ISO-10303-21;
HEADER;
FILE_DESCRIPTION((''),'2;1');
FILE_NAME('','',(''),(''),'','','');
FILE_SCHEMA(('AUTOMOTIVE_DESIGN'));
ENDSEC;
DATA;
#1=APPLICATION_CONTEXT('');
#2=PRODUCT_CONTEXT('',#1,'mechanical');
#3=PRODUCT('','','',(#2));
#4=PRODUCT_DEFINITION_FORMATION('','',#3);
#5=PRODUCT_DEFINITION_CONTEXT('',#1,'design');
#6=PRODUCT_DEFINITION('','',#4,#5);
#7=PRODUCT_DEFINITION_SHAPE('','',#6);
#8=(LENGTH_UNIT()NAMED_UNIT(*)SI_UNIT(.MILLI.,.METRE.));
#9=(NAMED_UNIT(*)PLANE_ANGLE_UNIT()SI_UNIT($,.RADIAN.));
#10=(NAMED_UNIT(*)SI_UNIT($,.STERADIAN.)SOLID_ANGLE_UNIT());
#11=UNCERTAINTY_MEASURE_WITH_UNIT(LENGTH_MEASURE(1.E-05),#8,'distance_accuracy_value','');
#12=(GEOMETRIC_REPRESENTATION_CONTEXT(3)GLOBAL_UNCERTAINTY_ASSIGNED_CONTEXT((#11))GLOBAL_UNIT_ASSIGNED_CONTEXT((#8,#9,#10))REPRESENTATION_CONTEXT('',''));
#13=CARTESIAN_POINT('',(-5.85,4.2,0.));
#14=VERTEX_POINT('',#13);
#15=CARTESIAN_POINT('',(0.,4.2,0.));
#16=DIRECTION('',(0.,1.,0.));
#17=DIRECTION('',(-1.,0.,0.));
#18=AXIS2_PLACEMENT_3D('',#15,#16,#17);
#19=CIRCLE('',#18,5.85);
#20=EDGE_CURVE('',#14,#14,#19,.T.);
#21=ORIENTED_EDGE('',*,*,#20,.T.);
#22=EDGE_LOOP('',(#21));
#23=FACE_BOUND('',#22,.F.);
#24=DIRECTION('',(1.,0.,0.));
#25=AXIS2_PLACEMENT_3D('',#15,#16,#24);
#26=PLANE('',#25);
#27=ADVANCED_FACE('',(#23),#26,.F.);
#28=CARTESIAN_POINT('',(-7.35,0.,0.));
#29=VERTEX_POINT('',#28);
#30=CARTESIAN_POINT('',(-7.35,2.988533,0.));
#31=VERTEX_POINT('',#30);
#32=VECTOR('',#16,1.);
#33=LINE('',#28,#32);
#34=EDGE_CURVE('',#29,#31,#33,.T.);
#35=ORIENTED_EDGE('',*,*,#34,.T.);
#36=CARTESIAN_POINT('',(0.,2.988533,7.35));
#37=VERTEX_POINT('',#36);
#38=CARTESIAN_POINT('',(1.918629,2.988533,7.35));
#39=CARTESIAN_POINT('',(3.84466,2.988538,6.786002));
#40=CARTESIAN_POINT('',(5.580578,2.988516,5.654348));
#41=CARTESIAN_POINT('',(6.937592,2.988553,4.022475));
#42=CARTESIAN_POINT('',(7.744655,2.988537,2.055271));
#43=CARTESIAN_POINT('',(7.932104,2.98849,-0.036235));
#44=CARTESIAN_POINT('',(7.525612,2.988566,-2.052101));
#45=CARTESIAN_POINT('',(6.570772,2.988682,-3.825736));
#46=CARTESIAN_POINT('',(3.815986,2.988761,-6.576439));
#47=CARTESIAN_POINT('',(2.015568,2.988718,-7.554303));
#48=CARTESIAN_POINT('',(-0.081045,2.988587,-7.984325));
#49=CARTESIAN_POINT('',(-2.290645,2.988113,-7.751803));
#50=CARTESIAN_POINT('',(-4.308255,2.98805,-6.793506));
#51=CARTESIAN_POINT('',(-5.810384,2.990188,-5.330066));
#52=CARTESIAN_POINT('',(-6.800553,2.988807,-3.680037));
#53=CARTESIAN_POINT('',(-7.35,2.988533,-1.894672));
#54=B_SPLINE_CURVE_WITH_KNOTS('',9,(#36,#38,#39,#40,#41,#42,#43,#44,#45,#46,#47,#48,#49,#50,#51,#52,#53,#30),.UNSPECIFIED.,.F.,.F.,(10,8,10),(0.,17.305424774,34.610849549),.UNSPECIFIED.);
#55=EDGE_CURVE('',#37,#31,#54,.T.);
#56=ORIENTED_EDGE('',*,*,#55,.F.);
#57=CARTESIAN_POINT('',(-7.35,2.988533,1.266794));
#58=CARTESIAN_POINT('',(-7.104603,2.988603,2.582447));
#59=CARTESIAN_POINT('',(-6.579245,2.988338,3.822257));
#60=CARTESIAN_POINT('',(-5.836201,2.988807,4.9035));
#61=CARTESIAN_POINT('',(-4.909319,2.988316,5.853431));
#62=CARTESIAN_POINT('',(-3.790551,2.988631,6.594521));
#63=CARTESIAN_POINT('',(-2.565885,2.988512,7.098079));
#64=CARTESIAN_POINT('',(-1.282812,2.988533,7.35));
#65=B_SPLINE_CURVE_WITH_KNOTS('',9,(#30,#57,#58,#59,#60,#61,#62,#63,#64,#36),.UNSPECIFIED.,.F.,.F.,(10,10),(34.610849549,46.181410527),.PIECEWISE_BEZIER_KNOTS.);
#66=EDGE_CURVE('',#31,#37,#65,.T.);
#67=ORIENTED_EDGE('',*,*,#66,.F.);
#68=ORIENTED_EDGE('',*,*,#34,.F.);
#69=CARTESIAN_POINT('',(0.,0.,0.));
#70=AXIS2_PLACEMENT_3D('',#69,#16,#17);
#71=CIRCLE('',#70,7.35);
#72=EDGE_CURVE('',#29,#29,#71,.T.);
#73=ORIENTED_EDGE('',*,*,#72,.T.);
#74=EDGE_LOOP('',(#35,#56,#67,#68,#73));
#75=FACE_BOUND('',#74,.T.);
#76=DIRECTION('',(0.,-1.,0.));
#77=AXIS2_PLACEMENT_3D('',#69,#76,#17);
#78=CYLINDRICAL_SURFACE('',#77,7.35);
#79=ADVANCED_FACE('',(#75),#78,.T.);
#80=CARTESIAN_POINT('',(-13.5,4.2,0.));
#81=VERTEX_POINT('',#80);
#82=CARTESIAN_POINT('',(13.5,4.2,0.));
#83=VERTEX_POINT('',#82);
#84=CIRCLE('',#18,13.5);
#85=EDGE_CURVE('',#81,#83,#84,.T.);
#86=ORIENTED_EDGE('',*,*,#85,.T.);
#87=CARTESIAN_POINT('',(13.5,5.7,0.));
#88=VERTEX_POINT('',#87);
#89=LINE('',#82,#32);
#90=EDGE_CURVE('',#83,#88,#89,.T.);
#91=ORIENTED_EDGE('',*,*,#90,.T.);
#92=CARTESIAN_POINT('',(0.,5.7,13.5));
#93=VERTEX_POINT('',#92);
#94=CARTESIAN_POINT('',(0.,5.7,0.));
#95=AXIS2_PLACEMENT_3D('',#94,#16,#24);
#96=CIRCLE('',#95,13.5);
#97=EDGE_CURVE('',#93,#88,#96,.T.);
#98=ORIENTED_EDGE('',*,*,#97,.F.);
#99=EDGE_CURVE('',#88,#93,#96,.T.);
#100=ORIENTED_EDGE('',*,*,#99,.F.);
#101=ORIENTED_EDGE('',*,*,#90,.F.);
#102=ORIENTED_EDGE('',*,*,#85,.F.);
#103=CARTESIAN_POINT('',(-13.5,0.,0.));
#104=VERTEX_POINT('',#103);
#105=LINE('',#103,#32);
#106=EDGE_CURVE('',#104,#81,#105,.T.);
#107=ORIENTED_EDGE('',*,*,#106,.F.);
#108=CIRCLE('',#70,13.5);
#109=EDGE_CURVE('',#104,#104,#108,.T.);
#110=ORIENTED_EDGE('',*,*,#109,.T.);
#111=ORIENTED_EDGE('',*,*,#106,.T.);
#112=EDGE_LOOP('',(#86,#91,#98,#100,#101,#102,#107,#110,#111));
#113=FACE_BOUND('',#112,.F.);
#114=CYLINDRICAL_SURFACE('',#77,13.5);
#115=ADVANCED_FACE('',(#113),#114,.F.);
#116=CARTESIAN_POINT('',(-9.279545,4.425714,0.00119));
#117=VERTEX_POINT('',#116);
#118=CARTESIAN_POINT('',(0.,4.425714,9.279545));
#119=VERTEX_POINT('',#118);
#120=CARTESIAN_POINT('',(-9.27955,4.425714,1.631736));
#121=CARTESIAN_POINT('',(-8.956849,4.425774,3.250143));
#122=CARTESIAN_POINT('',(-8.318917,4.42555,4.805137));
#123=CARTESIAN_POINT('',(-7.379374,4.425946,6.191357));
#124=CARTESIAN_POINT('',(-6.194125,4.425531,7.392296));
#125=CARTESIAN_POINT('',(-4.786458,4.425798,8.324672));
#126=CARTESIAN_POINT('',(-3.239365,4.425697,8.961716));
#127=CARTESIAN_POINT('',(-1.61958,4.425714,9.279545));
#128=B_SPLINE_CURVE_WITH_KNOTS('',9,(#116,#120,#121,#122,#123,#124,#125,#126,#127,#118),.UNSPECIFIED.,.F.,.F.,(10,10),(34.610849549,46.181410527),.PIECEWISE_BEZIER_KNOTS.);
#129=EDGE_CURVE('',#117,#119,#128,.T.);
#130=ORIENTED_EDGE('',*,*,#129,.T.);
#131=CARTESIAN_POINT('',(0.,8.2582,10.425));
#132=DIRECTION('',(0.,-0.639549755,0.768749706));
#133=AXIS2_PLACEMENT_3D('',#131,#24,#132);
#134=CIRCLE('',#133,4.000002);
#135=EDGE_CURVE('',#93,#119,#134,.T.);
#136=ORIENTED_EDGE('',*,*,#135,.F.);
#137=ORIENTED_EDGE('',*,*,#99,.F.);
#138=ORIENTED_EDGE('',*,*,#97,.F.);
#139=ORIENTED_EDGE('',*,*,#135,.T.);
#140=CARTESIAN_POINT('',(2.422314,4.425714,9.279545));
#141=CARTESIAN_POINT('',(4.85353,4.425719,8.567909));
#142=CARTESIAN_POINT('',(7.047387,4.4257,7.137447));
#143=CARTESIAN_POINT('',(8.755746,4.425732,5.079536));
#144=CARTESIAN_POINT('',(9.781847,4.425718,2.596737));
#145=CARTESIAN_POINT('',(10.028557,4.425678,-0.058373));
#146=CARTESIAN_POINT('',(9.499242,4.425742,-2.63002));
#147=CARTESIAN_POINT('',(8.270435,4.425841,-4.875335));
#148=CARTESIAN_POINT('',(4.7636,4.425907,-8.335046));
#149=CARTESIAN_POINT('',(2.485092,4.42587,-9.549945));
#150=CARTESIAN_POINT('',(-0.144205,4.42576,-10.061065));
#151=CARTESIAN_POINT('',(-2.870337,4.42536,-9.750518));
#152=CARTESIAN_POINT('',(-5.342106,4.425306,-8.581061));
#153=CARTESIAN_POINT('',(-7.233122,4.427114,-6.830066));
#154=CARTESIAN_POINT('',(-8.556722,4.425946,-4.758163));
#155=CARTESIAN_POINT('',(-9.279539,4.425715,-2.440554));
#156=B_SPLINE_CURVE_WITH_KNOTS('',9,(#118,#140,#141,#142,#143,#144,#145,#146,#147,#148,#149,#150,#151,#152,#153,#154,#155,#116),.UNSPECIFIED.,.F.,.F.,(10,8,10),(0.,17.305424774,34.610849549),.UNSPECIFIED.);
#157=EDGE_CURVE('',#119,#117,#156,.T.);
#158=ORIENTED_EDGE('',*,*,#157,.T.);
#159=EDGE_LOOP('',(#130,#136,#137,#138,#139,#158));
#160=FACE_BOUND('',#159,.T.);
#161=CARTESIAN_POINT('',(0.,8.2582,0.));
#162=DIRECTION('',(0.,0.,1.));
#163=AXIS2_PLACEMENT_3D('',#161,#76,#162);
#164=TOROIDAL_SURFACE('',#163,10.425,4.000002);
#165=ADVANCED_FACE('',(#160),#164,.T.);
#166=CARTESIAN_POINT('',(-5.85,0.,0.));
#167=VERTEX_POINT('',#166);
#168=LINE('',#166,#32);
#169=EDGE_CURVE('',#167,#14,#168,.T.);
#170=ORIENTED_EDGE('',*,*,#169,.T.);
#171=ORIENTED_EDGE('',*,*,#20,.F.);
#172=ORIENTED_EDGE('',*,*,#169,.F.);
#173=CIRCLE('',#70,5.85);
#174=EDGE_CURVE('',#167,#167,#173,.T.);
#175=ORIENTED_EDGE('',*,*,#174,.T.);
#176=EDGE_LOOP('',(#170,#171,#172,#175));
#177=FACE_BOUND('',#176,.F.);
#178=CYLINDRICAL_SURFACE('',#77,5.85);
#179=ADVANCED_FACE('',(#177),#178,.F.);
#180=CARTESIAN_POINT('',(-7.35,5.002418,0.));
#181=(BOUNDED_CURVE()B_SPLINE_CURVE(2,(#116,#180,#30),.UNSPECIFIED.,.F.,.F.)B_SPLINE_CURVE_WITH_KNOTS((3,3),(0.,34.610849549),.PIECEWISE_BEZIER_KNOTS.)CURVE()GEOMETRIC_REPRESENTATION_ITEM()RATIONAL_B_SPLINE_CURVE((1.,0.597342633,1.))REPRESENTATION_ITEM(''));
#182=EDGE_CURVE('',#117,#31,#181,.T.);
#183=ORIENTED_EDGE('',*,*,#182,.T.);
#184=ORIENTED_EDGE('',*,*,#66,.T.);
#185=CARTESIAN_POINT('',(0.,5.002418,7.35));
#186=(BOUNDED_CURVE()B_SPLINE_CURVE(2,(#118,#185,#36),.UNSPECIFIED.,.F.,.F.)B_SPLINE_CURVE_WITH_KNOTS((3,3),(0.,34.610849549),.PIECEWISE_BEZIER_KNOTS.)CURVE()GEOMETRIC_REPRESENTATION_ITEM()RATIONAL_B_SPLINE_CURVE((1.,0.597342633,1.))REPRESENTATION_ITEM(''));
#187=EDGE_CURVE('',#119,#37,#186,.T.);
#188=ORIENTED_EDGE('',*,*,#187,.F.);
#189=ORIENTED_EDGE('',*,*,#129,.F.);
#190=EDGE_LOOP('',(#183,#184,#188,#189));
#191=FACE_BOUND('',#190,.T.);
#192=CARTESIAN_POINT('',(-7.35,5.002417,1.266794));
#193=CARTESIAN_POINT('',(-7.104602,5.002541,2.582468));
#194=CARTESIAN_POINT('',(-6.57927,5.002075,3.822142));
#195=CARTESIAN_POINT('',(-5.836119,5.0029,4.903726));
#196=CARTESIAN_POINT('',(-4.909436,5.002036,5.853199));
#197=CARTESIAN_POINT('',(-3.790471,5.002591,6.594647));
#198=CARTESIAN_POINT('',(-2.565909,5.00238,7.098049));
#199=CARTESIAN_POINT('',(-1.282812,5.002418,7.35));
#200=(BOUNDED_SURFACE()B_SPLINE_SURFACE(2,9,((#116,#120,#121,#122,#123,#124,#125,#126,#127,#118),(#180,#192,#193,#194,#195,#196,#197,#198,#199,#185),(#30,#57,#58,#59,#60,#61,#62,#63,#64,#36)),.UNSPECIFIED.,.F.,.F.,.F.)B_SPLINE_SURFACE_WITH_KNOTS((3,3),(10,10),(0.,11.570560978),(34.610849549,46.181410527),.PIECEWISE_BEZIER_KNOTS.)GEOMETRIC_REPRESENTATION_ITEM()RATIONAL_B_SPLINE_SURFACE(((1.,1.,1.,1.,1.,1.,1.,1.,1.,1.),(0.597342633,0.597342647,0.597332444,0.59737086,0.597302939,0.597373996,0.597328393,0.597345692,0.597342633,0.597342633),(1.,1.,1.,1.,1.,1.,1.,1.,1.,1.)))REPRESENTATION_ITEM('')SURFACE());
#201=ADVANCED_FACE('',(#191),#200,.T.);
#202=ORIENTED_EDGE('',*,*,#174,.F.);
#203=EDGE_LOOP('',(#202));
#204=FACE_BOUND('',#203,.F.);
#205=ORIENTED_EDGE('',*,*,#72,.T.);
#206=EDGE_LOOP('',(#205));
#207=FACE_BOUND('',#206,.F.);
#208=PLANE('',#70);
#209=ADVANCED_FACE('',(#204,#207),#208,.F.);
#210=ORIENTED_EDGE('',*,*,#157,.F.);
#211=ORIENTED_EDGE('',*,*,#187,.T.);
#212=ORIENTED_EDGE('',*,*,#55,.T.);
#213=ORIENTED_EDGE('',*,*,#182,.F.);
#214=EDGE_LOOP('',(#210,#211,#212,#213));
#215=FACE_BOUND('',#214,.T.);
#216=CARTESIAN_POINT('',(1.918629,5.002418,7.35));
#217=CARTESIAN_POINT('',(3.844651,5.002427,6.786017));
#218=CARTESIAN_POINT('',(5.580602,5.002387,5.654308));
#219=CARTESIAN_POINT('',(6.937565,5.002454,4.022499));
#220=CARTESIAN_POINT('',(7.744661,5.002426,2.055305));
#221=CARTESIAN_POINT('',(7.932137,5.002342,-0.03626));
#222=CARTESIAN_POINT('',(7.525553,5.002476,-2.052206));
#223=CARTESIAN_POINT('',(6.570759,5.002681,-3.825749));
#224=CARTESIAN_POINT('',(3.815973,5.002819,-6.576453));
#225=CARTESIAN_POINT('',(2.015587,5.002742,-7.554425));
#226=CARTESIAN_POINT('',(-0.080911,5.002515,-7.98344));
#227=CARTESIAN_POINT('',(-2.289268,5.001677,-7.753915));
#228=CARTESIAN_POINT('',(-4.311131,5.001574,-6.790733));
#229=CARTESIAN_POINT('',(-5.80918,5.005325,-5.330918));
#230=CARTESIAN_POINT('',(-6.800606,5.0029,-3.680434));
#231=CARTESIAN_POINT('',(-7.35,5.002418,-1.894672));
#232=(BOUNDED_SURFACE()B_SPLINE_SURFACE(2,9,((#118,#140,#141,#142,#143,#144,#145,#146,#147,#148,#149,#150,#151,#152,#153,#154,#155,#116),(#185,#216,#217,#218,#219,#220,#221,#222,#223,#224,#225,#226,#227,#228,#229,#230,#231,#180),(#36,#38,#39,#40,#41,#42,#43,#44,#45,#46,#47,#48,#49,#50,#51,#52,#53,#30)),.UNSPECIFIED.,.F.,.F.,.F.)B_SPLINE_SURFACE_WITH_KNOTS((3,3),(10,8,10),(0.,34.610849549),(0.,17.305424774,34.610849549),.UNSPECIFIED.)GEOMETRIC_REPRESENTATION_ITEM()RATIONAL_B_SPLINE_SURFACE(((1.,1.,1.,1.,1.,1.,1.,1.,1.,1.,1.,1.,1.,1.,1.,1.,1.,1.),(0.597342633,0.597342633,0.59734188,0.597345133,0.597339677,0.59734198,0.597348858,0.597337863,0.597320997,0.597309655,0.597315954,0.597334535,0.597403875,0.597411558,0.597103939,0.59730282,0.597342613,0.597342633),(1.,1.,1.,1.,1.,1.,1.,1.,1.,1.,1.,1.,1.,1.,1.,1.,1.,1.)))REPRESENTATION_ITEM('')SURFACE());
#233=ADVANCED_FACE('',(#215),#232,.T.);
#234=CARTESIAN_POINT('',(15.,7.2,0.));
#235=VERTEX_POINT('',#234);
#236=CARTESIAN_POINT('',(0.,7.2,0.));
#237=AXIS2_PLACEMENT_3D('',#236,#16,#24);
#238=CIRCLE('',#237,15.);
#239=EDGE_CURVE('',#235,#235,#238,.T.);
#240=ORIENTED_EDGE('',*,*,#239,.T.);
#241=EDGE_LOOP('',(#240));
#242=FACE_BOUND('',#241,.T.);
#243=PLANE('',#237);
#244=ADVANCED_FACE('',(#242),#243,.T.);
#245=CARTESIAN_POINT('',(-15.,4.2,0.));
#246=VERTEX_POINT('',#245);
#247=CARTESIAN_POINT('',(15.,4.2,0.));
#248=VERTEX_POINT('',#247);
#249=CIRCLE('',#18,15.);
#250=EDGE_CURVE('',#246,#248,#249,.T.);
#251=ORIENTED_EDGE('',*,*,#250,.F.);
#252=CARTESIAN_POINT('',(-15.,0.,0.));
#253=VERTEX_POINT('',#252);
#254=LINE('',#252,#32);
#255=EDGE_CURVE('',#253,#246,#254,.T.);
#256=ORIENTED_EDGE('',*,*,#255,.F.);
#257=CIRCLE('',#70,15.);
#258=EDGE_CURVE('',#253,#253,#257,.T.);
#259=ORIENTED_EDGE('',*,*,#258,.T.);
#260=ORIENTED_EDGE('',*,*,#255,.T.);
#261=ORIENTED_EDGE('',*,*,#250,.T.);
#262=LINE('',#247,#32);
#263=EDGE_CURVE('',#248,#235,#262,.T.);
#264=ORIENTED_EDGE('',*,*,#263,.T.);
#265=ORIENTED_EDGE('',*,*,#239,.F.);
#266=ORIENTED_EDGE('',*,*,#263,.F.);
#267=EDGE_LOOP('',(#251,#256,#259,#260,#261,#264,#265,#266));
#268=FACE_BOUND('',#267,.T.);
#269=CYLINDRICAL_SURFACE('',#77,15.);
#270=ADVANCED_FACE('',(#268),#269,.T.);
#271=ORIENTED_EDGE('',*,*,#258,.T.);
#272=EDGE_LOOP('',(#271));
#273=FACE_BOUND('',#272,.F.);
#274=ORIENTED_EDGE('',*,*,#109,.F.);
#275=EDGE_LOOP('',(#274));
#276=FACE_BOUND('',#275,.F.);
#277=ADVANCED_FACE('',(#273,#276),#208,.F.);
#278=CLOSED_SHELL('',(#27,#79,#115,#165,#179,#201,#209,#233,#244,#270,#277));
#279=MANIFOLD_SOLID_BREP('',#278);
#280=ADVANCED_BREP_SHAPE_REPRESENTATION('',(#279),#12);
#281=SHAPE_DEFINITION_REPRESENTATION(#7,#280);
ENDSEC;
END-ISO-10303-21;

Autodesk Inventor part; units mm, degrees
ref_plane "YZ Plane" through (0, 0, 0) normal (1, 0, 0) x (0, 1, 0)
ref_plane "XZ Plane" through (0, 0, 0) normal (0, 1, 0) x (-1, 0, 0)
ref_plane "XY Plane" through (0, 0, 0) normal (0, 0, 1) x (1, 0, 0)
sketch "Sketch1" plane through (0, 0, 0) normal (0, 1, 0) x (-1, 0, 0)
  circle A0 centre (0, 0) radius 5.85
  circle A1 centre (0, 0) radius 15
  dimension "d0" = 11.7
  dimension "d1" = 30
extrude "Extrusion1" add sketch "Sketch1" along normal blind 4.2
sketch "Sketch2" plane through (0, 4.2, 0) normal (0, 1, 0) x (1, 0, 0)
  circle A0 centre (0, 0) radius 15 projected
extrude "Extrusion2" add sketch "Sketch2" along normal blind 3
shell "Shell1" thickness 1.5 removed faces 1 at (-11.748, 0, -1.6632)
sketch "Sketch3" plane through (0, 0, 0) normal (1, 0, 0) x (0, 1, 0)
  line L0 (5.7, -13.5) -> (5.7, 13.5) projected
  line L1 (5.7, 7.35) -> (0, 7.35) projected
  arc A0 (5.7, 13.5) -> (5.7, 7.35) centre (8.2582, 10.425) ccw
  line L2 (-1.6516, 0) -> (9.9098, 0) projected
  point P0 (0, 0)
  dimension "d7" = 4
revolve "Revolution1" add sketch "Sketch3" angle 360 about axis through (0, -10, 0) along (0, 1, 0)
fillet "Fillet1" radius 1.5 2 edges at (5.1969, 5.7, -5.1976) (-5.1969, 5.7, 5.1976)
properties part number "Button_adapter"
